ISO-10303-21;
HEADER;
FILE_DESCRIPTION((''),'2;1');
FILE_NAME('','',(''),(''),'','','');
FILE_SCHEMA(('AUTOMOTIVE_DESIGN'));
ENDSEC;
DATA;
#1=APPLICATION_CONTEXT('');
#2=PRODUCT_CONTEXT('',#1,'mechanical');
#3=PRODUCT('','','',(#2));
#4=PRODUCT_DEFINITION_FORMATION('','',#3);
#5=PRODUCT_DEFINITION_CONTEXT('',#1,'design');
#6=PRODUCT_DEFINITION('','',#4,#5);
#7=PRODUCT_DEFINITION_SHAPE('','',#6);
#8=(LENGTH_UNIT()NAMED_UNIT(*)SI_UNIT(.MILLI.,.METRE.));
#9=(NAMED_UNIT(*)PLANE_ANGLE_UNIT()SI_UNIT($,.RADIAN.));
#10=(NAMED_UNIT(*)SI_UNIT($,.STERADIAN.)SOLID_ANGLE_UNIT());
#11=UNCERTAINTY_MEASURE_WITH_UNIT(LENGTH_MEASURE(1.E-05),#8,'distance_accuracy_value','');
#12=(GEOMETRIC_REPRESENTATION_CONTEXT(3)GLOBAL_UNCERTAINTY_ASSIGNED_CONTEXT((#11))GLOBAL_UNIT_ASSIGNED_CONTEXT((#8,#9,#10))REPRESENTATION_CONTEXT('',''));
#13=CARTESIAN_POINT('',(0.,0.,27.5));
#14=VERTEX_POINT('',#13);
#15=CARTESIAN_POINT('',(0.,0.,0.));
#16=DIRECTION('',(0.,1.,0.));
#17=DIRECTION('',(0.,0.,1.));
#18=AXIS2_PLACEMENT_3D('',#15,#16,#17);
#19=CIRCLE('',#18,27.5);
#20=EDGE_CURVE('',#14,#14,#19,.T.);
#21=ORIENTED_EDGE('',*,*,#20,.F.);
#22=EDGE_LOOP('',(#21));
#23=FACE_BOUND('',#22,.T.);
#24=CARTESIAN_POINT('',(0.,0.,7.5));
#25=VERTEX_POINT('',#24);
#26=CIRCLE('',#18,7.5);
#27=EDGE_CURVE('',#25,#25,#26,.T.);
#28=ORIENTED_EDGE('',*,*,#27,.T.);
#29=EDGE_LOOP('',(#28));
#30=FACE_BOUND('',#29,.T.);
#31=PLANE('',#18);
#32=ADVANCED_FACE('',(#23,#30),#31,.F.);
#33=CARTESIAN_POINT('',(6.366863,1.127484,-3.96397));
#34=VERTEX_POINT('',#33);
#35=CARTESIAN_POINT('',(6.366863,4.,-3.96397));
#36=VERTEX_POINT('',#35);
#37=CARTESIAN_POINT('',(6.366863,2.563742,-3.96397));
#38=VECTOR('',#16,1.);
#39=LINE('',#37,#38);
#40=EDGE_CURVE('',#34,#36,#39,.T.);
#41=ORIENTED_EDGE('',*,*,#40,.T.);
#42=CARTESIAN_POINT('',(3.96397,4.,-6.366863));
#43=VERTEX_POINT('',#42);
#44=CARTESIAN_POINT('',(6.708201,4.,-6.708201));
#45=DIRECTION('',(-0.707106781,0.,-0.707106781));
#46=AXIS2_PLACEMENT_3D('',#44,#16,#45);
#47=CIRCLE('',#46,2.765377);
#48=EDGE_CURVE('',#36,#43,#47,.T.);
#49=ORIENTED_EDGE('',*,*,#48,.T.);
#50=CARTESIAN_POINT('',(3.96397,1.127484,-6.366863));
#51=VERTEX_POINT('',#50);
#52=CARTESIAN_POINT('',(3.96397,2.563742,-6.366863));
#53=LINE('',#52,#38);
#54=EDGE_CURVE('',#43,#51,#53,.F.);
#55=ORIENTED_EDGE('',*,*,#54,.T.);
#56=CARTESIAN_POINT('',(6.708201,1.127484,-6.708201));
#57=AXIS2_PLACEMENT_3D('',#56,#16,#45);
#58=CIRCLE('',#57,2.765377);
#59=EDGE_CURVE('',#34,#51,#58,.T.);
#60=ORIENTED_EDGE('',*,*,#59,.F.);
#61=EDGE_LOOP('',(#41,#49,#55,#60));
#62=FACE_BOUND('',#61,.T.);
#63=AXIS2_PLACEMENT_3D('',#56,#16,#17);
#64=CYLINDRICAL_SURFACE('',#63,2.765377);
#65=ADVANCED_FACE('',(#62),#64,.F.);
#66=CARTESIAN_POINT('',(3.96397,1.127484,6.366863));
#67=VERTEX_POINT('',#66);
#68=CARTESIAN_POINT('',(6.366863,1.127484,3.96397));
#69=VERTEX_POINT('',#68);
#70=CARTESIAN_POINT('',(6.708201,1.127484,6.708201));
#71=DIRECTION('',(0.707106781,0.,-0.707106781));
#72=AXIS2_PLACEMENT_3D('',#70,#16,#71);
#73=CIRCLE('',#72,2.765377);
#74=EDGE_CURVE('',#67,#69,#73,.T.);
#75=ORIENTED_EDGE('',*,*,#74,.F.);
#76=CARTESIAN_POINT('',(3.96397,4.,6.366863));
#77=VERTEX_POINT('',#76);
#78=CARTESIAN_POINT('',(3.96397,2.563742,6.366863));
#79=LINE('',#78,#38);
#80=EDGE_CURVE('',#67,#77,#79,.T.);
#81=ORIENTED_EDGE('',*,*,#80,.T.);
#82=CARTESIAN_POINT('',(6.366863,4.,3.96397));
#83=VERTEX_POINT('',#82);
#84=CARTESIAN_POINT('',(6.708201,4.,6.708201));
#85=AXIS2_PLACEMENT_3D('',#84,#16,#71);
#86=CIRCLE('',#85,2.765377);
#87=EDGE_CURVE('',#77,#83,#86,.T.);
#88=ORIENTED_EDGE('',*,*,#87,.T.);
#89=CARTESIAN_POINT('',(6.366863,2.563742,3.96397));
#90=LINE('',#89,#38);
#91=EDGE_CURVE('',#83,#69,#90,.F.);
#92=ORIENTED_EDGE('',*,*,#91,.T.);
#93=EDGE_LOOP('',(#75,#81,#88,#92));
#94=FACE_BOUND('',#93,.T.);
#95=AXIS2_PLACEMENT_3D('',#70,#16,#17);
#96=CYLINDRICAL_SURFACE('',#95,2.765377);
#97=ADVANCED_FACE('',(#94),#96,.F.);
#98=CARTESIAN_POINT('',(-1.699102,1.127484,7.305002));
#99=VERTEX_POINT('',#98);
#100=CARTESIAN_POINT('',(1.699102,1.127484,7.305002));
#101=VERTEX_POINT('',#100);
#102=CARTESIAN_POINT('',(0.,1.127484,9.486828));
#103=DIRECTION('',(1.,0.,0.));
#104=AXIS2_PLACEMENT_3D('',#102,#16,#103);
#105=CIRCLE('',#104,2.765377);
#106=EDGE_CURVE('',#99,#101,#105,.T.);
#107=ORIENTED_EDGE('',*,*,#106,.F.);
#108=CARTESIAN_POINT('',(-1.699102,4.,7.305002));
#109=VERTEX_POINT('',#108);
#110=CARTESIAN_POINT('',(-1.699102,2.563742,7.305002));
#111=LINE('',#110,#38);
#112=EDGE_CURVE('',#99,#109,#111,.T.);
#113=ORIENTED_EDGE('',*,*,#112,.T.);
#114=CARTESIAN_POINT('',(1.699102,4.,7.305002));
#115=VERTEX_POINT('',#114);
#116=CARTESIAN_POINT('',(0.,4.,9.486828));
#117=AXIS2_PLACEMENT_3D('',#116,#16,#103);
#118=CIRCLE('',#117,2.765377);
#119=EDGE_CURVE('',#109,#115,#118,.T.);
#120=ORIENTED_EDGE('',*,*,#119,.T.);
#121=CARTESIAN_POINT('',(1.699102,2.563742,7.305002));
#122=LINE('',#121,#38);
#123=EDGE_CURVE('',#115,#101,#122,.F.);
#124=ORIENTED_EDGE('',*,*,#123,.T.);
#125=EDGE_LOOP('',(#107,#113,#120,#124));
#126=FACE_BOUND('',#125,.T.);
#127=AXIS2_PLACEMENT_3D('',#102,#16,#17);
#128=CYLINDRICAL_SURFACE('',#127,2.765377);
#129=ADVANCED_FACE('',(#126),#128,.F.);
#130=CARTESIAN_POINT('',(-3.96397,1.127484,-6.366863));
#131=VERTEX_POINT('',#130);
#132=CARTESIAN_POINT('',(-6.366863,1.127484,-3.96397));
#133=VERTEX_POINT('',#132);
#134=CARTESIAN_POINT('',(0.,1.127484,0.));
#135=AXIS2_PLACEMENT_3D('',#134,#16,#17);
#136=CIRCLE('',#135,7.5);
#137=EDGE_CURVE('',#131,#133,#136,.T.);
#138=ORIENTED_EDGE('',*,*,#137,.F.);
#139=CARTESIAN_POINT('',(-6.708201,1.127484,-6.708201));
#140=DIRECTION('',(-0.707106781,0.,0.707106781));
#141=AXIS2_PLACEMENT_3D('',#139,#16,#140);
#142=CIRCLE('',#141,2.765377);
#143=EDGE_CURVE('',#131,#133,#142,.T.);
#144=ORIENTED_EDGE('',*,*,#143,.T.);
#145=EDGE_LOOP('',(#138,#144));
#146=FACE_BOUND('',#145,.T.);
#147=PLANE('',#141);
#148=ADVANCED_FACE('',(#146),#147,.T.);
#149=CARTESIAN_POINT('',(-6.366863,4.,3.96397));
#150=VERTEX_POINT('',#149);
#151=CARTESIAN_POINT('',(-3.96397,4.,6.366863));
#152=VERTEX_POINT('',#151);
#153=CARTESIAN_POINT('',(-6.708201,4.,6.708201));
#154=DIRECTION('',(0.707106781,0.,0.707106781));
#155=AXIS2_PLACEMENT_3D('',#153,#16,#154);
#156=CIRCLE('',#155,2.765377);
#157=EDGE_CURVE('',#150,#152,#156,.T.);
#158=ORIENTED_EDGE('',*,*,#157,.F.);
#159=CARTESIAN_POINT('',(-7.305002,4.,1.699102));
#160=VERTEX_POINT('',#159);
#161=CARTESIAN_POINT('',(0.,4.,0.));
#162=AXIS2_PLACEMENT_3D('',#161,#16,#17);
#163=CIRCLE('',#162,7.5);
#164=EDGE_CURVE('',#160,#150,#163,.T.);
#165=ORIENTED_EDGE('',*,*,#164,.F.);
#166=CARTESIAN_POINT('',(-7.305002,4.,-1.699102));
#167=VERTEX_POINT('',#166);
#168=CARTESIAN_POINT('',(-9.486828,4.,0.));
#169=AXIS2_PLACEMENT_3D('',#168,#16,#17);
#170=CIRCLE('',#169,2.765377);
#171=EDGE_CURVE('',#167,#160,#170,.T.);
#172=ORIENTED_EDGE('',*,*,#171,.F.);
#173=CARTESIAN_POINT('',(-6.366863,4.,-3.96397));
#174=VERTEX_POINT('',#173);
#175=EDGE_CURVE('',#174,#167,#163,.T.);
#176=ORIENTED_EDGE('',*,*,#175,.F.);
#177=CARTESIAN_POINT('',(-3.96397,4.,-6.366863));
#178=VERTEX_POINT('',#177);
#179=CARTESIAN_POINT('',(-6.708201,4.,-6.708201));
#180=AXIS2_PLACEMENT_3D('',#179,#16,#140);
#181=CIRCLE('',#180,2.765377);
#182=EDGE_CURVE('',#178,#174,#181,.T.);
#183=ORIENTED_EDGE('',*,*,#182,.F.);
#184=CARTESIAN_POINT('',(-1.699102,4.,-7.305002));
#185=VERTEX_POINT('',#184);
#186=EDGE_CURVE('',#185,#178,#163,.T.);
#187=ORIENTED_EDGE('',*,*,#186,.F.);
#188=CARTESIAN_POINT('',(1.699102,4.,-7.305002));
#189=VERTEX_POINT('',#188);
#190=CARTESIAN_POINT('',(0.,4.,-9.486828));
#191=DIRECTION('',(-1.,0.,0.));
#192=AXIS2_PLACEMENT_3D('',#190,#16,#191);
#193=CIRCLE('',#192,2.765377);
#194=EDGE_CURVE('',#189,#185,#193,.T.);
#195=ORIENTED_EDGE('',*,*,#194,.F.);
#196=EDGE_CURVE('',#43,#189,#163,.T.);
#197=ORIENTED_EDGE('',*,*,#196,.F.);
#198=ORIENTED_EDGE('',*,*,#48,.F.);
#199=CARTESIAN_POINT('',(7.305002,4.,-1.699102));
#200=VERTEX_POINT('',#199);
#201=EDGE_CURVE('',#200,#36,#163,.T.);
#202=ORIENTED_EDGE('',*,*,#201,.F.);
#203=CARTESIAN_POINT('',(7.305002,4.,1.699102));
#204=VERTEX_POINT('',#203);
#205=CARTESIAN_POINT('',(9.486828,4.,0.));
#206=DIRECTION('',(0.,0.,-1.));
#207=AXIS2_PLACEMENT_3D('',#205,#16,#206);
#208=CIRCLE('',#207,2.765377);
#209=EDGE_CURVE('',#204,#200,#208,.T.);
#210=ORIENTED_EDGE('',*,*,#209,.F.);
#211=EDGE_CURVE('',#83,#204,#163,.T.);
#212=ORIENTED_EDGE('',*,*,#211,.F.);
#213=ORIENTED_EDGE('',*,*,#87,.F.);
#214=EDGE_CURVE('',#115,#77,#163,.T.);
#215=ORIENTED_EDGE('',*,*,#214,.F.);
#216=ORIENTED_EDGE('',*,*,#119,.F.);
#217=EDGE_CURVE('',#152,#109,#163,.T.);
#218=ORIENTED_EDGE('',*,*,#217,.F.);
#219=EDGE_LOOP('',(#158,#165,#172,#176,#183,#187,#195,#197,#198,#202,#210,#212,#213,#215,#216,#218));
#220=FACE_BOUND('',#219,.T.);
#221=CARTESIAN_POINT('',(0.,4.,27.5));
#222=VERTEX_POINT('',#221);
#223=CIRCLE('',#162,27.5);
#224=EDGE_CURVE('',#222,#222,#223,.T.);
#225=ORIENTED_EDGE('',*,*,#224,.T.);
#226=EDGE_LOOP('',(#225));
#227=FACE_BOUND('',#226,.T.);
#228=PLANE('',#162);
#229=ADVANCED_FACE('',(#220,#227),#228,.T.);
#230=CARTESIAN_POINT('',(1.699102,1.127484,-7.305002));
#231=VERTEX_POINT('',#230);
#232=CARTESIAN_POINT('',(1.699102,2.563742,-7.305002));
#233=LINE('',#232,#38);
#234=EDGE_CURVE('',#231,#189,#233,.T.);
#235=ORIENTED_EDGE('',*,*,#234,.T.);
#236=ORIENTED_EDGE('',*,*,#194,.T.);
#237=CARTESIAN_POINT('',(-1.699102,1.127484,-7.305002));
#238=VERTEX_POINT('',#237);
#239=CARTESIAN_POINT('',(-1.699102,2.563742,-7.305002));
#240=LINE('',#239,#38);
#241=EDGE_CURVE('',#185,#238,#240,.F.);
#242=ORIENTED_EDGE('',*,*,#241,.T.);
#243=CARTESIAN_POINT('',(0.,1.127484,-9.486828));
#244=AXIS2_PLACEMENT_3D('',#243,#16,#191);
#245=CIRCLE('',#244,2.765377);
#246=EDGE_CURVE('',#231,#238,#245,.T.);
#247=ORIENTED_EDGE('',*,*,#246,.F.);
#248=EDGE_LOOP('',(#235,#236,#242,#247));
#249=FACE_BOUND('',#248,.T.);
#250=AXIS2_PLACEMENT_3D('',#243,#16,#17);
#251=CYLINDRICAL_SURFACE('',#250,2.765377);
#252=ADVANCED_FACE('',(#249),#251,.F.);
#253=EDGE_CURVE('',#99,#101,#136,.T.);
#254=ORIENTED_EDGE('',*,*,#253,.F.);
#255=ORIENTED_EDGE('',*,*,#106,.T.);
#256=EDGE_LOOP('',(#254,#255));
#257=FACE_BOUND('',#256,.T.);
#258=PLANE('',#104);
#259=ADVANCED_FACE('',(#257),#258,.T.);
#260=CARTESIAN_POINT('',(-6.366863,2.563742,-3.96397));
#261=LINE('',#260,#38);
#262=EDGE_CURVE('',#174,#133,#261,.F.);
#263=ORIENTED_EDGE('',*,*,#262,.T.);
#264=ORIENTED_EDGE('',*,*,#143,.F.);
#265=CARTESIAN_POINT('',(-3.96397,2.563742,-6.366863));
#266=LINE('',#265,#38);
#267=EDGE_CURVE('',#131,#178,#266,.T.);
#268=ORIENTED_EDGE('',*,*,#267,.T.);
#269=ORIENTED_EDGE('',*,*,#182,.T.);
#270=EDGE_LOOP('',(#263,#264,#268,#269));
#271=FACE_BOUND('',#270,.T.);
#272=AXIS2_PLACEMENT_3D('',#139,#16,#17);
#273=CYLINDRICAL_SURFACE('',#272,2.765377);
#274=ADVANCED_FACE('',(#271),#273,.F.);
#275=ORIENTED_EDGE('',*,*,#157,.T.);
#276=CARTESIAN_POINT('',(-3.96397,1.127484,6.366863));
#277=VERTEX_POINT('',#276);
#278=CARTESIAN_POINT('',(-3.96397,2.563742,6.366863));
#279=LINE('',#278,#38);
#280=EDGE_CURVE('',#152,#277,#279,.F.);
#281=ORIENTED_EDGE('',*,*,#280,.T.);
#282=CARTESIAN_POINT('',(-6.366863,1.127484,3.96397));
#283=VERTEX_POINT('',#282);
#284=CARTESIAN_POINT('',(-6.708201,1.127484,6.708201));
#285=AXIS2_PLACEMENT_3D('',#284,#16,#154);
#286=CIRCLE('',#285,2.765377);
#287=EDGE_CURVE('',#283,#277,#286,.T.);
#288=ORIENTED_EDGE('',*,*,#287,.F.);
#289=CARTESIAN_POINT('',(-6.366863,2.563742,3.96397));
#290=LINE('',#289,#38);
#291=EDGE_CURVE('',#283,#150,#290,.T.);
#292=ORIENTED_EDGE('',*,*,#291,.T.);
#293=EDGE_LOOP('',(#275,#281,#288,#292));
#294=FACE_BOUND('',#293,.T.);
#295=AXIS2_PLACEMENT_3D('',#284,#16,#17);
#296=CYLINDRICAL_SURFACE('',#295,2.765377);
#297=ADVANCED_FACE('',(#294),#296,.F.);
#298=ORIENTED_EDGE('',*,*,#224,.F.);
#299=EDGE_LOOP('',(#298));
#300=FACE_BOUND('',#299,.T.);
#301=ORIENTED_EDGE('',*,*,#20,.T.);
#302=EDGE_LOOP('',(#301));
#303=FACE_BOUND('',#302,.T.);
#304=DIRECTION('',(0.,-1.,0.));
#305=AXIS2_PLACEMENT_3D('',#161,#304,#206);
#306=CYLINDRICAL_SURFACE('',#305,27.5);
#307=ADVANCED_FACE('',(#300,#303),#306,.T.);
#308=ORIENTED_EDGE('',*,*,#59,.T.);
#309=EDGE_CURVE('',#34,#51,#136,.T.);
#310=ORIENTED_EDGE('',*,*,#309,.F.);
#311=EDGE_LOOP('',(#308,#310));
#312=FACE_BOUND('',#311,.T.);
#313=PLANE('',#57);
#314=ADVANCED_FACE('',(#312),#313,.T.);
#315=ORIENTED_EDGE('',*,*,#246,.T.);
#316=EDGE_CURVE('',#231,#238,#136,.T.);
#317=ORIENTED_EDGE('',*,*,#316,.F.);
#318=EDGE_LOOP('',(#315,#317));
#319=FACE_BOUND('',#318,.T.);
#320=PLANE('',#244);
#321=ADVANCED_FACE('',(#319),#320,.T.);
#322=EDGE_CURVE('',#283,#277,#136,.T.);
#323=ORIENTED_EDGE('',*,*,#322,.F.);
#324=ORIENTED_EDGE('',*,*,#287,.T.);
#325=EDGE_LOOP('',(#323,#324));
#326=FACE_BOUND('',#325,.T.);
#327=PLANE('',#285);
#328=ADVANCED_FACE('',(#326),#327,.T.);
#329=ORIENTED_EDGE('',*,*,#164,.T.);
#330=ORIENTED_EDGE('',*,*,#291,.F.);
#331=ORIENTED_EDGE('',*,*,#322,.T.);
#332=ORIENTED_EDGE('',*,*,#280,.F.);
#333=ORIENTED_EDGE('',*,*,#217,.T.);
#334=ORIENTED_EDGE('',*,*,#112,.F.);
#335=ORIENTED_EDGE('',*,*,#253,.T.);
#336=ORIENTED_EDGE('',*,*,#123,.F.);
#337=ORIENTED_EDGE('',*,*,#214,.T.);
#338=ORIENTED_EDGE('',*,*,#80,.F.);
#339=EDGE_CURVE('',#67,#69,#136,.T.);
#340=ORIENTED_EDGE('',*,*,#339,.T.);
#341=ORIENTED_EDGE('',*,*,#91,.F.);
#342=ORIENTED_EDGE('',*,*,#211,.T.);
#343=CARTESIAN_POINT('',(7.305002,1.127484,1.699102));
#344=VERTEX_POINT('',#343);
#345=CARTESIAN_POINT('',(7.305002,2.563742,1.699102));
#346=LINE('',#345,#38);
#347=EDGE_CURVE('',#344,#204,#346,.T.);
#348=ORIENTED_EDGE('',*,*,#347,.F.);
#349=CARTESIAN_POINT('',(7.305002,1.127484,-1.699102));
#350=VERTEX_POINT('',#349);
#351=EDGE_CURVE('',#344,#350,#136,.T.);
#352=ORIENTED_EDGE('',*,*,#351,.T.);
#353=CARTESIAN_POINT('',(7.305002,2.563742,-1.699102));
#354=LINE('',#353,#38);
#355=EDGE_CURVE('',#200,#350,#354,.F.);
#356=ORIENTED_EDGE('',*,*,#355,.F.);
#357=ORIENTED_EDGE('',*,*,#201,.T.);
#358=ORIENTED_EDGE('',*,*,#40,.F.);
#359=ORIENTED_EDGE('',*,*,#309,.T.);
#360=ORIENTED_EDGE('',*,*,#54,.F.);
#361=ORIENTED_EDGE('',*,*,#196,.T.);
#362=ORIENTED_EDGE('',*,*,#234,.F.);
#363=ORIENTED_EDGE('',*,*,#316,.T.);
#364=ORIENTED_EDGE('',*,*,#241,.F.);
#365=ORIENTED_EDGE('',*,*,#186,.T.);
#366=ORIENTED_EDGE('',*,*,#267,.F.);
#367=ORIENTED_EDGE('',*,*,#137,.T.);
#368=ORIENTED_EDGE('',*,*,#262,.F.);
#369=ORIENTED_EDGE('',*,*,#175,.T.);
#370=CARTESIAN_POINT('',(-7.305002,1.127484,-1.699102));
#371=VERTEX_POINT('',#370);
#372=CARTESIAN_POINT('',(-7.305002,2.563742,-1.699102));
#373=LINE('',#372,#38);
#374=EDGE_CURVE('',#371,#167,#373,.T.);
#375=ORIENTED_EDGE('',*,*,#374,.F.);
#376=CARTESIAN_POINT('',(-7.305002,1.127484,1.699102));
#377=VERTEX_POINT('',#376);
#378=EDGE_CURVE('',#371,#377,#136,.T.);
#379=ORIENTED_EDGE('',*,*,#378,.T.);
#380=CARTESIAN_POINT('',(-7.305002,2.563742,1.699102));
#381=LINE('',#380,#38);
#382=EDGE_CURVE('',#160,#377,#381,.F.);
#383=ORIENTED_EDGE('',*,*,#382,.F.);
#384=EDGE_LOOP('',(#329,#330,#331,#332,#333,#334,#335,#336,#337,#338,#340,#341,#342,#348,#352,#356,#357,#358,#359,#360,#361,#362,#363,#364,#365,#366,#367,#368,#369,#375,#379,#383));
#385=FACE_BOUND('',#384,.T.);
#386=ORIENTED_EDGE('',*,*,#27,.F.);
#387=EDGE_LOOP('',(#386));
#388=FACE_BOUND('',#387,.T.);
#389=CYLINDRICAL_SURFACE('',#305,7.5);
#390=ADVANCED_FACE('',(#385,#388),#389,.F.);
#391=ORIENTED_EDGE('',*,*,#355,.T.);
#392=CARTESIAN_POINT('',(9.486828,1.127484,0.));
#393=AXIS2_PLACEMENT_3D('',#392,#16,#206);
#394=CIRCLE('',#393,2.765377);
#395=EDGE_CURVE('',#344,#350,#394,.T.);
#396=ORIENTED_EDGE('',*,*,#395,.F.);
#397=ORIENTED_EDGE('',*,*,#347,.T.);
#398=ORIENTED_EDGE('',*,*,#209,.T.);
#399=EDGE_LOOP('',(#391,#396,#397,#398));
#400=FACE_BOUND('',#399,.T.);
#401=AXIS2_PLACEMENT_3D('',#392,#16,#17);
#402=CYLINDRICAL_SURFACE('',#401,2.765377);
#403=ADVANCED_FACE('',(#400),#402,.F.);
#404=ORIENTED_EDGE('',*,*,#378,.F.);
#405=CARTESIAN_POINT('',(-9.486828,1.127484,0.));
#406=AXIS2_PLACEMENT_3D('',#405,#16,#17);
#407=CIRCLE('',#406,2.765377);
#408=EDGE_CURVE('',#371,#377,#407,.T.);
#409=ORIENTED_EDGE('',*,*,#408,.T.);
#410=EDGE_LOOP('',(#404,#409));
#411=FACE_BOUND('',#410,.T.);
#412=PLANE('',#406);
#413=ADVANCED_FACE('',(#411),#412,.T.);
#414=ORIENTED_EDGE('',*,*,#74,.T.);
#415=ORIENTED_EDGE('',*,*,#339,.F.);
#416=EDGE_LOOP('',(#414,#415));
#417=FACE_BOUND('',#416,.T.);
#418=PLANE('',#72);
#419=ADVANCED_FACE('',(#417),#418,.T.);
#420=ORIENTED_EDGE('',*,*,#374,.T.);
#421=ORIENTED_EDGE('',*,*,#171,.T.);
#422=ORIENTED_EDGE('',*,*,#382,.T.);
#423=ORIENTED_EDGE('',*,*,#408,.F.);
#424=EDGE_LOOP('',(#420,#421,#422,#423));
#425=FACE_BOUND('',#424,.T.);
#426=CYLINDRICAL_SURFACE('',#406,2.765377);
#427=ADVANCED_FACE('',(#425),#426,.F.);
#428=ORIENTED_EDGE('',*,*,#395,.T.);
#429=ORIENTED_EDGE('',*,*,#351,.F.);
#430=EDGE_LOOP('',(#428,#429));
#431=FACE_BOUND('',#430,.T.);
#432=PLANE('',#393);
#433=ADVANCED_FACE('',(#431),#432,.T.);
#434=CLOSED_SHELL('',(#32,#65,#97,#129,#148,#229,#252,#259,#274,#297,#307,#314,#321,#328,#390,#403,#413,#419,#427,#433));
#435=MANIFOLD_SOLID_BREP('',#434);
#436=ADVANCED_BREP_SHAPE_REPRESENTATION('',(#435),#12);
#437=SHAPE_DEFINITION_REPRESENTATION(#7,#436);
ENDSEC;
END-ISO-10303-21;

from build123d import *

# Parameters (mm, degrees)
SKETCH1_R           = 27.5
BOSS_EXTRUDE1_DEPTH = 4
SKETCH2_R           = 7.5
CUT_EXTRUDE1_DEPTH  = 40.096035605
SKETCH3_R           = 2.765377474
CUT_EXTRUDE2_DEPTH  = 2.872516315
CIRPATTERN1_COUNT   = 8


with BuildPart() as part:
    # Sketch1 → Boss-Extrude1 (new body)
    with BuildSketch(Plane(origin=(0, 0, 0), x_dir=(1, 0, 0), z_dir=(0, 1, 0))):
        Circle(SKETCH1_R)
    extrude(amount=BOSS_EXTRUDE1_DEPTH)

    # Sketch2 → Cut-Extrude1 (cut, through all)
    with BuildSketch(Plane(origin=(0, 0, 0), x_dir=(1, 0, 0), z_dir=(0, 1, 0))):
        Circle(SKETCH2_R)
    extrude(amount=CUT_EXTRUDE1_DEPTH, mode=Mode.SUBTRACT)

    # Sketch3 → Cut-Extrude2 (cut)
    with BuildSketch(Plane(origin=(0, 4, 0), x_dir=(1, 0, 0), z_dir=(0, 1, 0))):
        with Locations((-9.486828159, 0)):
            Circle(SKETCH3_R)
    cut_extrude2 = extrude(amount=-CUT_EXTRUDE2_DEPTH, mode=Mode.SUBTRACT)

    # CirPattern1: Cut-Extrude2 ×8 about axis
    cirpattern1_axis = Axis((0, 0, 0), (0, 1, 0))
    for i in range(1, CIRPATTERN1_COUNT):
        add(cut_extrude2.rotate(cirpattern1_axis, i * 360 / CIRPATTERN1_COUNT), mode=Mode.SUBTRACT)


solid = part.part
